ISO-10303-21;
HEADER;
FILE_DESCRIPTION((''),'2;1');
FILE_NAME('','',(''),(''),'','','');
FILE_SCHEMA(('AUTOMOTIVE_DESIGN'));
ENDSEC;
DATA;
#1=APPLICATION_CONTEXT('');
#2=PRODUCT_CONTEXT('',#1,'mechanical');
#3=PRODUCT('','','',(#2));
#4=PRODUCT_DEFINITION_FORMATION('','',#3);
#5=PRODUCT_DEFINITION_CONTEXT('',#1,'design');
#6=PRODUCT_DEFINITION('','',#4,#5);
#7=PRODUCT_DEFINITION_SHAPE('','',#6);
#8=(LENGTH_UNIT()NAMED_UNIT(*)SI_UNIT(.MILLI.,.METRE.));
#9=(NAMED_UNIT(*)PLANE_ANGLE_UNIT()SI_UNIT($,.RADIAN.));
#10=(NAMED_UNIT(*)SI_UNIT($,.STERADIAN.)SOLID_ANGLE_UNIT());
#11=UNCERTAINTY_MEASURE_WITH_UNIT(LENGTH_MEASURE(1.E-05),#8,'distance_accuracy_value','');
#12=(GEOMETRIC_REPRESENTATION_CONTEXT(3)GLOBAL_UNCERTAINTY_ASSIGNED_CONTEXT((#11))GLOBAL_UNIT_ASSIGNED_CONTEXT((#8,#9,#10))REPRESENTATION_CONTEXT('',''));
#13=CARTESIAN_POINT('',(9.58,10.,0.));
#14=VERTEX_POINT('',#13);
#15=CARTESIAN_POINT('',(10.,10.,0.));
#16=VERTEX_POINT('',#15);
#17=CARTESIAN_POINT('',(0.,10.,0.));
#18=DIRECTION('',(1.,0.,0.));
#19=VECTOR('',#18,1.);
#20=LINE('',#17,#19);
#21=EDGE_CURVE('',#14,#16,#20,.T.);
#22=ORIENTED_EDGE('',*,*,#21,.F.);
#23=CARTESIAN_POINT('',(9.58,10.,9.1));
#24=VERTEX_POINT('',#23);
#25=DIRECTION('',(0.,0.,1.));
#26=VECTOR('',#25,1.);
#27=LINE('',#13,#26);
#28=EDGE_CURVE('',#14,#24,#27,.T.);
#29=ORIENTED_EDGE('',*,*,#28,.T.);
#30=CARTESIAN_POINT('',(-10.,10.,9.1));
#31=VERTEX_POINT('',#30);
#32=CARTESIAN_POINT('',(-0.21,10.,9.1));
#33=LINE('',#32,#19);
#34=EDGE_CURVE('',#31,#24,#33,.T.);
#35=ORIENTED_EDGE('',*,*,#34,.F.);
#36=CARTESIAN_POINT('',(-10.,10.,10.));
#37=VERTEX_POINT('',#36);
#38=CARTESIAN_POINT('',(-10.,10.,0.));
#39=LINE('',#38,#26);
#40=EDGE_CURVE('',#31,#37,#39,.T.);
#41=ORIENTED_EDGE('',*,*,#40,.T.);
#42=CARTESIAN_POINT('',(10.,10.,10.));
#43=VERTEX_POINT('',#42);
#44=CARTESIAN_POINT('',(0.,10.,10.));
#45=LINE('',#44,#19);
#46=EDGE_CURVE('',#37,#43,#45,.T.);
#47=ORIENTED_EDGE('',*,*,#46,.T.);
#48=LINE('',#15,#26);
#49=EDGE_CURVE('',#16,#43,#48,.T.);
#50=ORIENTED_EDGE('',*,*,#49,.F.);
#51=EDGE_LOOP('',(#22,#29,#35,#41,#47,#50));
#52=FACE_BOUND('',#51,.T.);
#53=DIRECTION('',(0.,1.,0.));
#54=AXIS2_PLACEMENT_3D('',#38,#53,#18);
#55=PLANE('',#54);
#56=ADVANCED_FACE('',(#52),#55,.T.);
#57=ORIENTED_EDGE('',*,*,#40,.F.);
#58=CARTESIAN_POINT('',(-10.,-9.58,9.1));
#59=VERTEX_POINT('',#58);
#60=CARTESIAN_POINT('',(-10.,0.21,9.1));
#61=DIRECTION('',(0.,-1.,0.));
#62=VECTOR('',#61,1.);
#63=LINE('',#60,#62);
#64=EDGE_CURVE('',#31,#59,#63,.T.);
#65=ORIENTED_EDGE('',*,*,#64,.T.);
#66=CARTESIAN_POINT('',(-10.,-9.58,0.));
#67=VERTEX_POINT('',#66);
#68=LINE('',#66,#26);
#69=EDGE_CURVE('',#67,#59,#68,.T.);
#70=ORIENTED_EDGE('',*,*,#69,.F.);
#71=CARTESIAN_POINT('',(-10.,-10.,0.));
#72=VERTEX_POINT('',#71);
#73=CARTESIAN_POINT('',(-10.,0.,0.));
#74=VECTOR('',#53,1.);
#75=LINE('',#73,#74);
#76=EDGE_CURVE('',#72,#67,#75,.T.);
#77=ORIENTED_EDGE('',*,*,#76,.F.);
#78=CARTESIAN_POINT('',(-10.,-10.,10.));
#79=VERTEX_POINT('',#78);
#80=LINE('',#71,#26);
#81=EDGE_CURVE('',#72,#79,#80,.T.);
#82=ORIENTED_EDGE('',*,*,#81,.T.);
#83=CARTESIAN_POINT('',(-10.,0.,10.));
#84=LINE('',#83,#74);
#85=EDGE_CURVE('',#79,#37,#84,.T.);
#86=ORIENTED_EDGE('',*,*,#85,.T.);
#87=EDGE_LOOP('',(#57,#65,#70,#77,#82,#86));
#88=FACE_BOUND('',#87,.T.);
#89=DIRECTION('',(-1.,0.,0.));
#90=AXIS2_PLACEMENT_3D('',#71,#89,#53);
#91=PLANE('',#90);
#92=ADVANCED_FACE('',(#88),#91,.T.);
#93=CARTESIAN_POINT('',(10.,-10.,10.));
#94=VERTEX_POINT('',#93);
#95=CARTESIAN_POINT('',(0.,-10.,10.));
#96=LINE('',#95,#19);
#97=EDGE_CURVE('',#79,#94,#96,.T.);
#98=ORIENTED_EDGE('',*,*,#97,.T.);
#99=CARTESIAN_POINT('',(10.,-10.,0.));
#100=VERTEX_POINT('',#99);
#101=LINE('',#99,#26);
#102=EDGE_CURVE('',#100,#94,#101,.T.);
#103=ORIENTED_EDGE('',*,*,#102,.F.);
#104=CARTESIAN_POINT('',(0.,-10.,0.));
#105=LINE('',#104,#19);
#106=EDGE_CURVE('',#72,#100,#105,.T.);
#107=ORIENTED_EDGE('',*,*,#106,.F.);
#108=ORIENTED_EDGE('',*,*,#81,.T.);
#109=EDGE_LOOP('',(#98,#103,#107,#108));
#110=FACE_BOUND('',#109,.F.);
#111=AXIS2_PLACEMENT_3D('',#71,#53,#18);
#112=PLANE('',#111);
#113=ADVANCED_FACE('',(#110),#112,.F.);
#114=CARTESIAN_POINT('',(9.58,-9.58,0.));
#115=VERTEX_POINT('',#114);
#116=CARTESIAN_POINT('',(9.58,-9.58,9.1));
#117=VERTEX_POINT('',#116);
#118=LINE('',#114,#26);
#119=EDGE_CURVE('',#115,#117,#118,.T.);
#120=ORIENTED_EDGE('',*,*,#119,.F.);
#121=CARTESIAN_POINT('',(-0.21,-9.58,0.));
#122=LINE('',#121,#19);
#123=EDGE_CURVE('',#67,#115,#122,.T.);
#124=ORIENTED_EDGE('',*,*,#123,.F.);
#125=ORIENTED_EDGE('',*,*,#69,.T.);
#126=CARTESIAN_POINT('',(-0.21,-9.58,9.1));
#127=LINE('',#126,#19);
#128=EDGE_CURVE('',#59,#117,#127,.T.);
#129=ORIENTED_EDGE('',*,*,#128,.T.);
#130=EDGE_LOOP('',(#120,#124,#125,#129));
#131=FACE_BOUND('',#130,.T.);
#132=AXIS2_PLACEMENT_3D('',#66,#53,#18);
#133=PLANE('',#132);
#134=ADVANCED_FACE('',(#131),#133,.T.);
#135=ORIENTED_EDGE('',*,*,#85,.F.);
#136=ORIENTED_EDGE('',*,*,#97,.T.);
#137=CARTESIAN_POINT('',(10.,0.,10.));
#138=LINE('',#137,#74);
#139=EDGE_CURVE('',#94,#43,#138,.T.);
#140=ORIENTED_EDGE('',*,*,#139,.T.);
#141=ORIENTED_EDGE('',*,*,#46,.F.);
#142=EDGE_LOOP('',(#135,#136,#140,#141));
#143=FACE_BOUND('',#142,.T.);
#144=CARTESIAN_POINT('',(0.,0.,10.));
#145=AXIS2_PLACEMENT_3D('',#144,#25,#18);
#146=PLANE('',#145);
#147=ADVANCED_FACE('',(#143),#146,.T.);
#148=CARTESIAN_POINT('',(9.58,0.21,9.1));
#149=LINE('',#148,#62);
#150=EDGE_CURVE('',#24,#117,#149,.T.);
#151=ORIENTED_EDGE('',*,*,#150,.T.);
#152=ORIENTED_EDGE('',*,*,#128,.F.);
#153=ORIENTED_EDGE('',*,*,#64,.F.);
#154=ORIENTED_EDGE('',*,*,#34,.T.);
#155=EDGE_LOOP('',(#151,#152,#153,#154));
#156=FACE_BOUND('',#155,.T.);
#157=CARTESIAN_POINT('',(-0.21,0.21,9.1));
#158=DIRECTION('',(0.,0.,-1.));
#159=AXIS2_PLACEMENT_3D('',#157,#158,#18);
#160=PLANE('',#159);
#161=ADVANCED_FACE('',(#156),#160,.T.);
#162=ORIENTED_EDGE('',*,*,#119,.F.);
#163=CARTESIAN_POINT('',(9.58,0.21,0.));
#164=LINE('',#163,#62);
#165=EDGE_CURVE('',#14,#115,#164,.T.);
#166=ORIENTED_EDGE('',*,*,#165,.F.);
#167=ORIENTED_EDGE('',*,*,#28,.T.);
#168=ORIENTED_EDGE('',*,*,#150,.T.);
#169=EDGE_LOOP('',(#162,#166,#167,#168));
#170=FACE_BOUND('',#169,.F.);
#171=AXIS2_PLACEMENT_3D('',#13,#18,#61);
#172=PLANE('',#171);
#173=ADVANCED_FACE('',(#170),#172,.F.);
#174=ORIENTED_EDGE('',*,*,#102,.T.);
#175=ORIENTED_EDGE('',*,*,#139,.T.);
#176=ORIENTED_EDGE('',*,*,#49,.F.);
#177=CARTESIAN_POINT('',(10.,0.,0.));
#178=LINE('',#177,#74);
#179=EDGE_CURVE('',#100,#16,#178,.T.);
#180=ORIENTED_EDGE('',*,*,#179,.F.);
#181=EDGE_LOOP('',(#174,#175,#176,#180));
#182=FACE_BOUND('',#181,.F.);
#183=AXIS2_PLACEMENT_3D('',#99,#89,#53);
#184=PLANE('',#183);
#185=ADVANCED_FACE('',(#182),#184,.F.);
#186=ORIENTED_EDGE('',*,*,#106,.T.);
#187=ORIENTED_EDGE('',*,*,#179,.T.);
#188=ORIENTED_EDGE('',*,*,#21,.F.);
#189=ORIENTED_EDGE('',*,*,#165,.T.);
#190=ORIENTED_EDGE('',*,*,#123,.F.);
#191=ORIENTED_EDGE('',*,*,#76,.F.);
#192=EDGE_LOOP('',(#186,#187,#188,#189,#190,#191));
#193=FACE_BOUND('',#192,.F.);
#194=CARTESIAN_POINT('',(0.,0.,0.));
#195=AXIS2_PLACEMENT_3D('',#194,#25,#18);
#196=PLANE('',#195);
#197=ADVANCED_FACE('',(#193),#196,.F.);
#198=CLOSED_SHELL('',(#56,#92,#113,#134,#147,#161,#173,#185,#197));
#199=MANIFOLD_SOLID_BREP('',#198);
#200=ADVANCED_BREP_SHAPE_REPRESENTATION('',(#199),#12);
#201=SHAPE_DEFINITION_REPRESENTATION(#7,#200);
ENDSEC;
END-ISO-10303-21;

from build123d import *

# Parameters (mm, degrees)
F3_W     = 20
F3_H     = 20
F4_DEPTH = 10
F5_W     = 19.58
F5_H     = 19.58
F6_DEPTH = 9.1


# Not quite as in the source:
# - a feature names something its author has since deleted; it is built from what else it names


with BuildPart() as f4:
    # F3 (on Top) → F4 (new body)
    with BuildSketch(Plane.XY):
        Rectangle(F3_W, F3_H)
    extrude(amount=F4_DEPTH)

    # F5 (on face) → F6 (cut, through all)
    with BuildSketch(Plane(origin=(0, 0, 0), x_dir=(1, 0, 0), z_dir=(0, 0, -1))):
        with Locations((-0.21, -0.21)):
            Rectangle(F5_W, F5_H)
    extrude(amount=-F6_DEPTH, mode=Mode.SUBTRACT)


solid = f4.part
